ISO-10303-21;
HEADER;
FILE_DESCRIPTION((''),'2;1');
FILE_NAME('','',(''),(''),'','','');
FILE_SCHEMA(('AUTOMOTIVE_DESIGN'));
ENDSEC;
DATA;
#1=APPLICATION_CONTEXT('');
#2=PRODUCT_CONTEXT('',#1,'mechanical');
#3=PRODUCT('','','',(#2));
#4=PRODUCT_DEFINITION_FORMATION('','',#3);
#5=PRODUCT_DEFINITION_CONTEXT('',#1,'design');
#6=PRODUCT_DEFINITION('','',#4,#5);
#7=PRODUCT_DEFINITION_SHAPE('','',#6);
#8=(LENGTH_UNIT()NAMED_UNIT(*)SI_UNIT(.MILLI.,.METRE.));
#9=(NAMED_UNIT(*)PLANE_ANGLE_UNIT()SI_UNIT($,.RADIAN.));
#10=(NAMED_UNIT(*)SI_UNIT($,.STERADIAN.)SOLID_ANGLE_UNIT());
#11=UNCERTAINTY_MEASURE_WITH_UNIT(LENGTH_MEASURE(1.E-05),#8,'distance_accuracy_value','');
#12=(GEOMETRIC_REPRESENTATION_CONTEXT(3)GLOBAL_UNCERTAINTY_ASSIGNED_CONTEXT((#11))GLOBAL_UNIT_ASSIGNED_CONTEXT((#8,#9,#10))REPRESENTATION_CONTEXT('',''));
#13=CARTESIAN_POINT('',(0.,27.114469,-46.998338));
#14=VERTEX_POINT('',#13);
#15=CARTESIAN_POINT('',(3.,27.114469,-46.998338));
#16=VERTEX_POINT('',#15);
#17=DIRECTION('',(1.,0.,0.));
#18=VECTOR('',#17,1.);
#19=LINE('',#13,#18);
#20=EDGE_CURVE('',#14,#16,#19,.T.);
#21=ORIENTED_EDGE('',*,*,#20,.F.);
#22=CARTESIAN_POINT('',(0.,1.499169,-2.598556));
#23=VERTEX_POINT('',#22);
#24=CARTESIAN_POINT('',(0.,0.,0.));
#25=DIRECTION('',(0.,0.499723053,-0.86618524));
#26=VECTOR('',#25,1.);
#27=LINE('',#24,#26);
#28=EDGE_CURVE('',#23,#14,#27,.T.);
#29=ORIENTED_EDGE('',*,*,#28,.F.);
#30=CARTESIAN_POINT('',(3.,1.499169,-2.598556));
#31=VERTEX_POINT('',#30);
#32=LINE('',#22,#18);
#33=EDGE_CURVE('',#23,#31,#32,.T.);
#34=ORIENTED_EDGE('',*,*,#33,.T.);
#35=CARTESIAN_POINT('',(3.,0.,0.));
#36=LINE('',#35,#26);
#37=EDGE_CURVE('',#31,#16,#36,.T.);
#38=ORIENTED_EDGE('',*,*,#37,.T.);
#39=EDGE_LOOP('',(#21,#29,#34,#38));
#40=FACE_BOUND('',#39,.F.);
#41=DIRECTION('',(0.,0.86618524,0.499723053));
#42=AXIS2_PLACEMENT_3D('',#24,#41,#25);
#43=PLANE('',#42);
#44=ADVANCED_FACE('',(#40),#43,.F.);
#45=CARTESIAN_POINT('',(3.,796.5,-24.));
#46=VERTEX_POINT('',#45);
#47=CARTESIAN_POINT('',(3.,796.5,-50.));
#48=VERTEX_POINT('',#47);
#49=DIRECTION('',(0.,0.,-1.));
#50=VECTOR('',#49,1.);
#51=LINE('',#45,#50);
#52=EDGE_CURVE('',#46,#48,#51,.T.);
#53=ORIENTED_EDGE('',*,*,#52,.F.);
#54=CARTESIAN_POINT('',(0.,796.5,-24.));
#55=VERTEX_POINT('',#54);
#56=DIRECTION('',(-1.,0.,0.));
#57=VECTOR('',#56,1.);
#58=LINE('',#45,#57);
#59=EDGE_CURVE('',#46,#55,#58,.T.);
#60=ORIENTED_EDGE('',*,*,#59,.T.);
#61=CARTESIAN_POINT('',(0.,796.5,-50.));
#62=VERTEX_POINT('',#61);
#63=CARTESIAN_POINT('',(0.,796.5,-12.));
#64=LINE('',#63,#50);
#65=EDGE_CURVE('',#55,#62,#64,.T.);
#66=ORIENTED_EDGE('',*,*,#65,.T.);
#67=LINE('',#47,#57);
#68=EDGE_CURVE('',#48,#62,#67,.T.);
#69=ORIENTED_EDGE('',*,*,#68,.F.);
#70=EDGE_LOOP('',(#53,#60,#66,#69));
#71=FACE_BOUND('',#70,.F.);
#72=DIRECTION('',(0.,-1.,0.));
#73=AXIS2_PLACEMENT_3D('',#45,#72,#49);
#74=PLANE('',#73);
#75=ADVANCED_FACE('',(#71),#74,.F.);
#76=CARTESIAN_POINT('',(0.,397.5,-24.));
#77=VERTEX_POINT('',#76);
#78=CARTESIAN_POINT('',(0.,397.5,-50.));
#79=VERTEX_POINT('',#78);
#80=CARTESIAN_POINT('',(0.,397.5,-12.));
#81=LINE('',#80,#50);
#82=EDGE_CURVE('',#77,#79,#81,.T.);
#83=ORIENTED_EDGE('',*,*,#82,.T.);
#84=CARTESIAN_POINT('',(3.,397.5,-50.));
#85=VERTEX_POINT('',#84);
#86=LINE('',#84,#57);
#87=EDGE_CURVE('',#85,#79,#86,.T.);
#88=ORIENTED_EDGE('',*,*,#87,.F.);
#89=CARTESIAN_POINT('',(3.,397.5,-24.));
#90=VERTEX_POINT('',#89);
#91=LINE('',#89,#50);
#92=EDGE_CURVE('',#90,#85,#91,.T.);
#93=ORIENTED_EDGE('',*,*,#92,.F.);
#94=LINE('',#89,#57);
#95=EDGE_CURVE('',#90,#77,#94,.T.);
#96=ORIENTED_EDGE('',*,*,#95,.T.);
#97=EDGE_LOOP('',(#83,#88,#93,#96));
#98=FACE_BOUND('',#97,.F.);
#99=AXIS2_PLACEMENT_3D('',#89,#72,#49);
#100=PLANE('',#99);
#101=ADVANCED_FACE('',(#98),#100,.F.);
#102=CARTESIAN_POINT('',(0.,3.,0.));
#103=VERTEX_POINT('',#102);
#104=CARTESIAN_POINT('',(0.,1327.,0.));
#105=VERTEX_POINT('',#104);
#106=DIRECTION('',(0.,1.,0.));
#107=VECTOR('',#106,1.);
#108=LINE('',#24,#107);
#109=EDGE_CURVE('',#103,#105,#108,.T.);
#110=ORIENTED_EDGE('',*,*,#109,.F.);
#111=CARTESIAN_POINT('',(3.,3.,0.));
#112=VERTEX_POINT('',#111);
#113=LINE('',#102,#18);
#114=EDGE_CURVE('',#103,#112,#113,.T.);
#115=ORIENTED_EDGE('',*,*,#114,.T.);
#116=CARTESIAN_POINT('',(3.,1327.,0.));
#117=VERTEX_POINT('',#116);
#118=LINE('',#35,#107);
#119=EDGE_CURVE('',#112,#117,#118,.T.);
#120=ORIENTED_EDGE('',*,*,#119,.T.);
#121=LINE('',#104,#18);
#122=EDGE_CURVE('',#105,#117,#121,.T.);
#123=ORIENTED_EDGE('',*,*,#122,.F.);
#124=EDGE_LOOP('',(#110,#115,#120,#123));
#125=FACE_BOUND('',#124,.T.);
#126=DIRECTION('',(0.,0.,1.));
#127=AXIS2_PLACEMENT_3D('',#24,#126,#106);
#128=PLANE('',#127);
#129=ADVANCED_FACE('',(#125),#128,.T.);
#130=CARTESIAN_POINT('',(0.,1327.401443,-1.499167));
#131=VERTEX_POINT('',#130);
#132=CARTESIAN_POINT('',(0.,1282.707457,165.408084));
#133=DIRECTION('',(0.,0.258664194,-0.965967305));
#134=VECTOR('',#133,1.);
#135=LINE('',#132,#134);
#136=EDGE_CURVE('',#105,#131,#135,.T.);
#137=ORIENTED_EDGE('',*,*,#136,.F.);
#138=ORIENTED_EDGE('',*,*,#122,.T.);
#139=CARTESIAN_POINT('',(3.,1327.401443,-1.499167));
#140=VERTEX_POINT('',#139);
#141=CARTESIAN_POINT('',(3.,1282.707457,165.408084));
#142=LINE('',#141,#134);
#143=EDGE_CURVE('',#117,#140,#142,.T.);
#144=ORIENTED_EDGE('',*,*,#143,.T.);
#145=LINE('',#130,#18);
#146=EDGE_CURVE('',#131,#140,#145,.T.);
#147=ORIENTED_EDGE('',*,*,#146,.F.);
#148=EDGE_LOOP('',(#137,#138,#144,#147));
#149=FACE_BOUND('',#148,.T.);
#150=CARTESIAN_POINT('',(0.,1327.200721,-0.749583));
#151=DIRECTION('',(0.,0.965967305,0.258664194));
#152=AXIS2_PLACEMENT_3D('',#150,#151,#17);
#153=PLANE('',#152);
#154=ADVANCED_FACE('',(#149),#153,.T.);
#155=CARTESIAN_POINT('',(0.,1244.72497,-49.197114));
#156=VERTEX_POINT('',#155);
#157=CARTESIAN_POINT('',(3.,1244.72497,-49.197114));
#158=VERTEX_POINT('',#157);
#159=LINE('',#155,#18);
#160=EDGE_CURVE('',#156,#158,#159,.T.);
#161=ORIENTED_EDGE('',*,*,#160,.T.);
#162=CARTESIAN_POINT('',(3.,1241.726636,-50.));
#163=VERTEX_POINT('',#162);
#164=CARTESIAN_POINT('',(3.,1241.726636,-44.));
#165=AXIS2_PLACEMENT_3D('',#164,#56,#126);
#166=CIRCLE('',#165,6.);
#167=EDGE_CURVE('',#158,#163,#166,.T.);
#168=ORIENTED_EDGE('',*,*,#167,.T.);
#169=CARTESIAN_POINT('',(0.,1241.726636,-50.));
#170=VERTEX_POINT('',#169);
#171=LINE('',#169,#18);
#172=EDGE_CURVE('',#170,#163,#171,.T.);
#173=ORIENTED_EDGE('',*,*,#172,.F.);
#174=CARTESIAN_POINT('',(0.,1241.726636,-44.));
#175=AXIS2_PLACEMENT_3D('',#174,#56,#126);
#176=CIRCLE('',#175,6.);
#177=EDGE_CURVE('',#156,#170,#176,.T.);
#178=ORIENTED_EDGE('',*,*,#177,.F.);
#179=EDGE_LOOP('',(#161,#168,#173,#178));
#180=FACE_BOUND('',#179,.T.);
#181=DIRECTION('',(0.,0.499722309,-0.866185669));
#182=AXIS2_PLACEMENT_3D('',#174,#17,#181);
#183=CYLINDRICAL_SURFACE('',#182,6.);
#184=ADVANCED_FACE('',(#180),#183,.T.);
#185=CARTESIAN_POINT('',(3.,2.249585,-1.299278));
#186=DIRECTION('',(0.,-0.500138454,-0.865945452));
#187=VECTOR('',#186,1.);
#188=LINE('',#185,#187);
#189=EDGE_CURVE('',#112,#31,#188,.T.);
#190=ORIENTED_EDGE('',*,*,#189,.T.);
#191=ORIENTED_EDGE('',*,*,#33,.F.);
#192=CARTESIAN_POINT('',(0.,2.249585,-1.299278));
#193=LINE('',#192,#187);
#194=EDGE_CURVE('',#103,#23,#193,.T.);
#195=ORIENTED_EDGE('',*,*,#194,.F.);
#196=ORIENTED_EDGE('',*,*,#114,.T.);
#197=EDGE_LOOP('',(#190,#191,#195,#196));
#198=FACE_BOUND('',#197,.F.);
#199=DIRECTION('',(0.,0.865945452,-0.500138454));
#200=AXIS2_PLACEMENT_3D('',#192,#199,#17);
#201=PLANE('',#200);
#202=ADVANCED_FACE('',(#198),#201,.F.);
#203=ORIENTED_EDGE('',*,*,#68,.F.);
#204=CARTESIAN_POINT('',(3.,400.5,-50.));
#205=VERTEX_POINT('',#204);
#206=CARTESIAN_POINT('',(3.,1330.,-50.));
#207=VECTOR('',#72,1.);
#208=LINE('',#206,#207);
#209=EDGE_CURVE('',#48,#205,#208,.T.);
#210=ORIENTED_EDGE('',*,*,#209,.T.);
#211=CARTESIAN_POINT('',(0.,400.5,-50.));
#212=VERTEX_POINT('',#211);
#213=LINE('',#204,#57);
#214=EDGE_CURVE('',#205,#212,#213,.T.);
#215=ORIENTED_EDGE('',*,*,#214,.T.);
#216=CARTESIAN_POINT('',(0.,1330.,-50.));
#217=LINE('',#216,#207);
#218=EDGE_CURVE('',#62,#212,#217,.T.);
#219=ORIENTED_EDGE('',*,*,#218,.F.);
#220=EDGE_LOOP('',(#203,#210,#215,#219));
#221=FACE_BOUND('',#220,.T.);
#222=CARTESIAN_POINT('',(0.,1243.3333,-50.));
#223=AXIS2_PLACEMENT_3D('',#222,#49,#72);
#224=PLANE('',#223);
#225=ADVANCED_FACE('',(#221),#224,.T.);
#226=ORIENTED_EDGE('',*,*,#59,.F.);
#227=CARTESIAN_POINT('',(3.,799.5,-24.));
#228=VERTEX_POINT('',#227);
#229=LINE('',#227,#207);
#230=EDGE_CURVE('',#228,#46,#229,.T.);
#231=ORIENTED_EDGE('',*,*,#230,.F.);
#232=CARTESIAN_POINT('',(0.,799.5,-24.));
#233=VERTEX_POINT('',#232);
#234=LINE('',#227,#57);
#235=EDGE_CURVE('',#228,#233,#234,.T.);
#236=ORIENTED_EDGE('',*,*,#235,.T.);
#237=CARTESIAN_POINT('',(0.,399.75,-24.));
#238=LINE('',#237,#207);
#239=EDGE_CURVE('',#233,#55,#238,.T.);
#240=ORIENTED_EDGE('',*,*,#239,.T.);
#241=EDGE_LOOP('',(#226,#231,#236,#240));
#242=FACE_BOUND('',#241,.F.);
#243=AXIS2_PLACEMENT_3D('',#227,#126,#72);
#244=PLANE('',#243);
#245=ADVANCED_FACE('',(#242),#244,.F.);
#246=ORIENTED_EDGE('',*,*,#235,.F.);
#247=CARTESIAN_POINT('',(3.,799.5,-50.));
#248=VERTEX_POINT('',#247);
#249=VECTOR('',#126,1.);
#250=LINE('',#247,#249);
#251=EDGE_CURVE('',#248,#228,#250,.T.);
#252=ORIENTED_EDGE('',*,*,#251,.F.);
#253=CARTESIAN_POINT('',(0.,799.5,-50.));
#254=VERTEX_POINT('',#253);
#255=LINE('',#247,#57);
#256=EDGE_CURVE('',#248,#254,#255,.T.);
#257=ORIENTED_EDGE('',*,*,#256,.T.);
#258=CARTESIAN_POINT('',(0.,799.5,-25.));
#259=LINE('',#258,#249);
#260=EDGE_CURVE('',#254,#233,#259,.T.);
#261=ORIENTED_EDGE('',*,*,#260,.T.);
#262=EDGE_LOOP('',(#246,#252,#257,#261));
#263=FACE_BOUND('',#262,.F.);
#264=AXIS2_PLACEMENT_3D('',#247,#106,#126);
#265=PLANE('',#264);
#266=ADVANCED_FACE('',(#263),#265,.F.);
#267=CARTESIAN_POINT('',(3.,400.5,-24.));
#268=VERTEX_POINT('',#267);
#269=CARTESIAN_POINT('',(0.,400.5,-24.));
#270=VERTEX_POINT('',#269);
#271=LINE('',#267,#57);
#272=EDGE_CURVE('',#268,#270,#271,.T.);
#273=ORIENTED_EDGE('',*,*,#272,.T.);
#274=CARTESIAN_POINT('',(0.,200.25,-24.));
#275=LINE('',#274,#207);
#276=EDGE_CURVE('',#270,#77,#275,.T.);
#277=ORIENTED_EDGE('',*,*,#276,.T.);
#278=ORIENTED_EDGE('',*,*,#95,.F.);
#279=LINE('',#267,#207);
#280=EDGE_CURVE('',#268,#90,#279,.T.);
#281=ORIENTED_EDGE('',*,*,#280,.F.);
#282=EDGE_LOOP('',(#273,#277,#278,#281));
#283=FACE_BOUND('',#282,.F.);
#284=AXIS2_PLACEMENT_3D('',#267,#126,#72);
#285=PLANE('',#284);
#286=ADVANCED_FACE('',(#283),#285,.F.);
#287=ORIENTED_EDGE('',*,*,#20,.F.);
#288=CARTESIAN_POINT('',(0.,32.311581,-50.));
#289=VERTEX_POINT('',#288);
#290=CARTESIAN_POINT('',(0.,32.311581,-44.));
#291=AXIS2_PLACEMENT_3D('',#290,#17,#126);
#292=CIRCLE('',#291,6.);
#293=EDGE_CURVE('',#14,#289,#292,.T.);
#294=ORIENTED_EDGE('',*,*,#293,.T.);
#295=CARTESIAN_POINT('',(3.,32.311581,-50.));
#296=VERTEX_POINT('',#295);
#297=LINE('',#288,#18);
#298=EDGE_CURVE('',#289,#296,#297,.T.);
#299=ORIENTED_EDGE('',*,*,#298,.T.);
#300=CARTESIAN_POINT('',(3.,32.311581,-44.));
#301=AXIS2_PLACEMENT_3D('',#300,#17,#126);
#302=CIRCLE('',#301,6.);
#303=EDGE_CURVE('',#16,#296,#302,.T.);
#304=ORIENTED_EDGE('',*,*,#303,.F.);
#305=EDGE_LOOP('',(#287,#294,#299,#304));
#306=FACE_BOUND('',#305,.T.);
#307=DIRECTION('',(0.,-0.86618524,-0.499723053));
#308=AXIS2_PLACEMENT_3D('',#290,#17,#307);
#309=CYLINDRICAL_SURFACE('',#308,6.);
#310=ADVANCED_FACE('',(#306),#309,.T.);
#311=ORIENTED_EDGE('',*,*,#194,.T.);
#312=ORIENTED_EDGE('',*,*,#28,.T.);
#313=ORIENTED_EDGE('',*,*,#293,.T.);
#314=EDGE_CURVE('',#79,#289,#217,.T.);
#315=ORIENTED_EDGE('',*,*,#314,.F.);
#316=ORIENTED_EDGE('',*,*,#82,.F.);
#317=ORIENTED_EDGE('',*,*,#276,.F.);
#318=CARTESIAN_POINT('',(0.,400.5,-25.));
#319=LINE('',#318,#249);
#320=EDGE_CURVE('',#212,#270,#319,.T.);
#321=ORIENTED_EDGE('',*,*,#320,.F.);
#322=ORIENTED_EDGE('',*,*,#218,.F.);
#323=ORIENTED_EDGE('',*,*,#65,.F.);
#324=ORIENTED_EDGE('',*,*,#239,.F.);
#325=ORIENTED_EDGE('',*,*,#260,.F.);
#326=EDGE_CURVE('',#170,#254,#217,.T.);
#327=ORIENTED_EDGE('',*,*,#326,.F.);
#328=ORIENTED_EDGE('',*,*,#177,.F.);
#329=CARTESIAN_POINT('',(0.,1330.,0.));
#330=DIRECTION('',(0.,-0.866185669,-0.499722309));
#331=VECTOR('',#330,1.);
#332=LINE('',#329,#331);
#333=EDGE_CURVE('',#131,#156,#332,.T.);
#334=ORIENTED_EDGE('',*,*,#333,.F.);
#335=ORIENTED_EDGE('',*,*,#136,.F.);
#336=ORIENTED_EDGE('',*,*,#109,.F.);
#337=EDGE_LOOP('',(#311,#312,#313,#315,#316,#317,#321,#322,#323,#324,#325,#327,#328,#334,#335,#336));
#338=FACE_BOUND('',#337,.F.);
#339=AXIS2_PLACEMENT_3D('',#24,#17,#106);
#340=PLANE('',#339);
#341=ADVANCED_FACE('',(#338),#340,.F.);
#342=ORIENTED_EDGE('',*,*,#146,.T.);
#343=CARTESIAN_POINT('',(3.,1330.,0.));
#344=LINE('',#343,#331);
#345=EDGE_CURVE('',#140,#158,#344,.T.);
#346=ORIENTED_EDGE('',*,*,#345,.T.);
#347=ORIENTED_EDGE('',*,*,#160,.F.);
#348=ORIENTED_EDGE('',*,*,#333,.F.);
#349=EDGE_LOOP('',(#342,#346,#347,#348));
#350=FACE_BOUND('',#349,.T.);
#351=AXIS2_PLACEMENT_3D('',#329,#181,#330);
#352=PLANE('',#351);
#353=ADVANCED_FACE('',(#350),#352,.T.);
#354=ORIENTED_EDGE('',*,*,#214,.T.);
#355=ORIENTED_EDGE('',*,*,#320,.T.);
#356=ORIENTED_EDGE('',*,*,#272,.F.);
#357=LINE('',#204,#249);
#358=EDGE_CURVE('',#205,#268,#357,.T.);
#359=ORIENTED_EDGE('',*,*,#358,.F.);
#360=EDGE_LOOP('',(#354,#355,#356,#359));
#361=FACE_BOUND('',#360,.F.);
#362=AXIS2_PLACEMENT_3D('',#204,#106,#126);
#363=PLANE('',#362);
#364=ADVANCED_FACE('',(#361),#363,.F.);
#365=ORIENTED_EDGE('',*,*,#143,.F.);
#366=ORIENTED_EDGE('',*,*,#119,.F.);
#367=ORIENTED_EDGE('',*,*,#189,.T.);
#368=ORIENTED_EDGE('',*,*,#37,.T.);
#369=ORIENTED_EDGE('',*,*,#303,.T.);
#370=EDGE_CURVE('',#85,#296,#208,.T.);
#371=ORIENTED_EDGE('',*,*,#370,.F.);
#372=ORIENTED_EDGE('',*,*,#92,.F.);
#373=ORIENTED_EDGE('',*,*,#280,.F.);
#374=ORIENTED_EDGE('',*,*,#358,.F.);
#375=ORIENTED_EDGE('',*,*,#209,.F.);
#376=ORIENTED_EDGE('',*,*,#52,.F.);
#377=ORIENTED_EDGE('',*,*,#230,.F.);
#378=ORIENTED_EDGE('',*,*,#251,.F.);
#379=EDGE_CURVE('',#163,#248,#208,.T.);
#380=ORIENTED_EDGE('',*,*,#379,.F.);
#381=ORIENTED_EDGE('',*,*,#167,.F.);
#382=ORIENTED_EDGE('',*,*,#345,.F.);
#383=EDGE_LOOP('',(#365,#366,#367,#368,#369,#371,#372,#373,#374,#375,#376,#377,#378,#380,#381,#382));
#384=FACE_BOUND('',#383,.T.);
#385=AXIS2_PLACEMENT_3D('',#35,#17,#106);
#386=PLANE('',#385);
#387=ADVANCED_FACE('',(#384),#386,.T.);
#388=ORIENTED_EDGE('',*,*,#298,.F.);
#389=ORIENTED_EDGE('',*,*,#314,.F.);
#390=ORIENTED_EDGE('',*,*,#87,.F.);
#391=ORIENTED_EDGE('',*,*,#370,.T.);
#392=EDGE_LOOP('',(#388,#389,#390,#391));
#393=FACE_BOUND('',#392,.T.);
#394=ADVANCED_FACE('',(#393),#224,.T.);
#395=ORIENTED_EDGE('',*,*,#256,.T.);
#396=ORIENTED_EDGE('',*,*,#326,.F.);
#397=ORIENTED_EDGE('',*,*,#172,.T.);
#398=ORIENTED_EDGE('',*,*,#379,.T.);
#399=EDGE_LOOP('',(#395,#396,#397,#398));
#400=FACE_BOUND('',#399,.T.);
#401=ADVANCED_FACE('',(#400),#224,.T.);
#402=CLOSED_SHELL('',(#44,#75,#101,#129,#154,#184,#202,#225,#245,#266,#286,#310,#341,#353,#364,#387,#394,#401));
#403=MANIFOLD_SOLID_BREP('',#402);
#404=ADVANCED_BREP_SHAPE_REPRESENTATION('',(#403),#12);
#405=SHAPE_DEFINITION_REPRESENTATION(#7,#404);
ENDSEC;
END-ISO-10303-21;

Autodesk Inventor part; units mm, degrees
ref_plane "YZ Plane" through (0, 0, 0) normal (1, 0, 0) x (0, 1, 0)
ref_plane "XZ Plane" through (0, 0, 0) normal (0, 1, 0) x (-1, 0, 0)
ref_plane "XY Plane" through (0, 0, 0) normal (0, 0, 1) x (1, 0, 0)
sketch "Sketch2" plane through (0, 0, 0) normal (1, 0, 0) x (0, 1, 0)
  line L0 (0, 0) -> (1330, 0)
  line L1 (1330, 0) -> (1330, -50)
  line L2 (1330, -50) -> (0, -50)
  line L3 (0, -50) -> (0, 0)
  line L4 (1330, -50) -> (1293.2713, 0) construction
  line L5 (1330, 0) -> (1243.3333, -50)
  line L6 (0, 0) -> (28.8462, -50)
  dimension "d28" = 1330
  dimension "d29" = 50
  dimension "d31" = 36.3
  dimension "d32" = 60.018
  dimension "d36" = 60.018
extrude "Plate2" add sketch "Sketch2" along normal blind 3 contours L0 L5 L2 L6
chamfer "Corner Chamfer1" distance 3 angle 45 2 edges at (1.5, 1330, 0) (1.5, 0, 0)
fillet "Corner Round1" radius 6 2 edges at (1.5, 28.8462, -50) (1.5, 1243.3333, -50)
sketch "Sketch3" plane through (3, 0, 0) normal (1, 0, 0) x (0, 0, -1)
  line L0 (24, 397.5) -> (50, 397.5)
  line L1 (50, 397.5) -> (50, 400.5)
  line L2 (50, 400.5) -> (24, 400.5)
  line L3 (24, 400.5) -> (24, 397.5)
  line L4 (50, 1241.7267) -> (50, 32.3115) projected
  line L5 (50, 399) -> (0, 399) construction
  line L6 (0, 3) -> (0, 1327) projected
  line L7 (50, 798) -> (0, 798) construction
  line L8 (24, 796.5) -> (50, 796.5)
  line L9 (50, 796.5) -> (50, 799.5)
  line L10 (50, 799.5) -> (24, 799.5)
  line L11 (24, 799.5) -> (24, 796.5)
  point P0 (0, 0)
  point P1 (50, 796.5)
  point P2 (50, 799.5)
  dimension "d39" = 26
  dimension "d40" = 3
  dimension "d41" = 399
  dimension "d42" = 798
  dimension "d43" = 3
  dimension "d44" = 26
extrude "Extrusion1" cut sketch "Sketch3" against normal through all
sketch "Sketch4" plane through (3, 0, 0) normal (1, 0, 0) x (0, 0, -1)
  line L0 (15.0943, 691.214) -> (35.8481, 691.214) construction
  line L1 (35.8481, 691.214) -> (35.8481, 467.4424) construction
  line L2 (35.8481, 467.4424) -> (15.0943, 467.4424) construction
  line L3 (15.0943, 467.4424) -> (15.0943, 691.214) construction
  point P0 (0, 0)
mark "Mark1"
equation "\"d41\" = 0.3 * Конус_длина_борт"
equation "\"d42\" = 0.6 * Конус_длина_борт"
equation "\"d28\" = Конус_длина_борт"
equation "\"d32\" = Конус_Угол_борт"
equation "\"d36\" = Конус_Угол_борт"
equation "\"d40\" = Thickness"
equation "\"d43\" = Thickness"
equation "\"d44\" = d39"
equation "\"d30\" = Thickness"
equation "\"GapSize\" = Thickness"
equation "\"MinimumRemnant\" = 2 * Thickness"
equation "\"BendReliefDepth\" = 0.5 * Thickness"
equation "\"BendReliefWidth\" = Thickness"
equation "\"CornerReliefSize\" = 4 * Thickness"
equation "\"JacobiRadiusSize\" = BendRadius"
equation "\"TransitionRadius\" = BendRadius"
equation "\"Конус_длина_борт\" = 1330"
equation "\"Конус_Угол_борт\" = 60.018361deg"
equation "\"Thickness\" = 3"
equation "\"BendRadius\" = 5"
properties part number "MSC 110 STRINGER CONE" material "Stainless Steel"
